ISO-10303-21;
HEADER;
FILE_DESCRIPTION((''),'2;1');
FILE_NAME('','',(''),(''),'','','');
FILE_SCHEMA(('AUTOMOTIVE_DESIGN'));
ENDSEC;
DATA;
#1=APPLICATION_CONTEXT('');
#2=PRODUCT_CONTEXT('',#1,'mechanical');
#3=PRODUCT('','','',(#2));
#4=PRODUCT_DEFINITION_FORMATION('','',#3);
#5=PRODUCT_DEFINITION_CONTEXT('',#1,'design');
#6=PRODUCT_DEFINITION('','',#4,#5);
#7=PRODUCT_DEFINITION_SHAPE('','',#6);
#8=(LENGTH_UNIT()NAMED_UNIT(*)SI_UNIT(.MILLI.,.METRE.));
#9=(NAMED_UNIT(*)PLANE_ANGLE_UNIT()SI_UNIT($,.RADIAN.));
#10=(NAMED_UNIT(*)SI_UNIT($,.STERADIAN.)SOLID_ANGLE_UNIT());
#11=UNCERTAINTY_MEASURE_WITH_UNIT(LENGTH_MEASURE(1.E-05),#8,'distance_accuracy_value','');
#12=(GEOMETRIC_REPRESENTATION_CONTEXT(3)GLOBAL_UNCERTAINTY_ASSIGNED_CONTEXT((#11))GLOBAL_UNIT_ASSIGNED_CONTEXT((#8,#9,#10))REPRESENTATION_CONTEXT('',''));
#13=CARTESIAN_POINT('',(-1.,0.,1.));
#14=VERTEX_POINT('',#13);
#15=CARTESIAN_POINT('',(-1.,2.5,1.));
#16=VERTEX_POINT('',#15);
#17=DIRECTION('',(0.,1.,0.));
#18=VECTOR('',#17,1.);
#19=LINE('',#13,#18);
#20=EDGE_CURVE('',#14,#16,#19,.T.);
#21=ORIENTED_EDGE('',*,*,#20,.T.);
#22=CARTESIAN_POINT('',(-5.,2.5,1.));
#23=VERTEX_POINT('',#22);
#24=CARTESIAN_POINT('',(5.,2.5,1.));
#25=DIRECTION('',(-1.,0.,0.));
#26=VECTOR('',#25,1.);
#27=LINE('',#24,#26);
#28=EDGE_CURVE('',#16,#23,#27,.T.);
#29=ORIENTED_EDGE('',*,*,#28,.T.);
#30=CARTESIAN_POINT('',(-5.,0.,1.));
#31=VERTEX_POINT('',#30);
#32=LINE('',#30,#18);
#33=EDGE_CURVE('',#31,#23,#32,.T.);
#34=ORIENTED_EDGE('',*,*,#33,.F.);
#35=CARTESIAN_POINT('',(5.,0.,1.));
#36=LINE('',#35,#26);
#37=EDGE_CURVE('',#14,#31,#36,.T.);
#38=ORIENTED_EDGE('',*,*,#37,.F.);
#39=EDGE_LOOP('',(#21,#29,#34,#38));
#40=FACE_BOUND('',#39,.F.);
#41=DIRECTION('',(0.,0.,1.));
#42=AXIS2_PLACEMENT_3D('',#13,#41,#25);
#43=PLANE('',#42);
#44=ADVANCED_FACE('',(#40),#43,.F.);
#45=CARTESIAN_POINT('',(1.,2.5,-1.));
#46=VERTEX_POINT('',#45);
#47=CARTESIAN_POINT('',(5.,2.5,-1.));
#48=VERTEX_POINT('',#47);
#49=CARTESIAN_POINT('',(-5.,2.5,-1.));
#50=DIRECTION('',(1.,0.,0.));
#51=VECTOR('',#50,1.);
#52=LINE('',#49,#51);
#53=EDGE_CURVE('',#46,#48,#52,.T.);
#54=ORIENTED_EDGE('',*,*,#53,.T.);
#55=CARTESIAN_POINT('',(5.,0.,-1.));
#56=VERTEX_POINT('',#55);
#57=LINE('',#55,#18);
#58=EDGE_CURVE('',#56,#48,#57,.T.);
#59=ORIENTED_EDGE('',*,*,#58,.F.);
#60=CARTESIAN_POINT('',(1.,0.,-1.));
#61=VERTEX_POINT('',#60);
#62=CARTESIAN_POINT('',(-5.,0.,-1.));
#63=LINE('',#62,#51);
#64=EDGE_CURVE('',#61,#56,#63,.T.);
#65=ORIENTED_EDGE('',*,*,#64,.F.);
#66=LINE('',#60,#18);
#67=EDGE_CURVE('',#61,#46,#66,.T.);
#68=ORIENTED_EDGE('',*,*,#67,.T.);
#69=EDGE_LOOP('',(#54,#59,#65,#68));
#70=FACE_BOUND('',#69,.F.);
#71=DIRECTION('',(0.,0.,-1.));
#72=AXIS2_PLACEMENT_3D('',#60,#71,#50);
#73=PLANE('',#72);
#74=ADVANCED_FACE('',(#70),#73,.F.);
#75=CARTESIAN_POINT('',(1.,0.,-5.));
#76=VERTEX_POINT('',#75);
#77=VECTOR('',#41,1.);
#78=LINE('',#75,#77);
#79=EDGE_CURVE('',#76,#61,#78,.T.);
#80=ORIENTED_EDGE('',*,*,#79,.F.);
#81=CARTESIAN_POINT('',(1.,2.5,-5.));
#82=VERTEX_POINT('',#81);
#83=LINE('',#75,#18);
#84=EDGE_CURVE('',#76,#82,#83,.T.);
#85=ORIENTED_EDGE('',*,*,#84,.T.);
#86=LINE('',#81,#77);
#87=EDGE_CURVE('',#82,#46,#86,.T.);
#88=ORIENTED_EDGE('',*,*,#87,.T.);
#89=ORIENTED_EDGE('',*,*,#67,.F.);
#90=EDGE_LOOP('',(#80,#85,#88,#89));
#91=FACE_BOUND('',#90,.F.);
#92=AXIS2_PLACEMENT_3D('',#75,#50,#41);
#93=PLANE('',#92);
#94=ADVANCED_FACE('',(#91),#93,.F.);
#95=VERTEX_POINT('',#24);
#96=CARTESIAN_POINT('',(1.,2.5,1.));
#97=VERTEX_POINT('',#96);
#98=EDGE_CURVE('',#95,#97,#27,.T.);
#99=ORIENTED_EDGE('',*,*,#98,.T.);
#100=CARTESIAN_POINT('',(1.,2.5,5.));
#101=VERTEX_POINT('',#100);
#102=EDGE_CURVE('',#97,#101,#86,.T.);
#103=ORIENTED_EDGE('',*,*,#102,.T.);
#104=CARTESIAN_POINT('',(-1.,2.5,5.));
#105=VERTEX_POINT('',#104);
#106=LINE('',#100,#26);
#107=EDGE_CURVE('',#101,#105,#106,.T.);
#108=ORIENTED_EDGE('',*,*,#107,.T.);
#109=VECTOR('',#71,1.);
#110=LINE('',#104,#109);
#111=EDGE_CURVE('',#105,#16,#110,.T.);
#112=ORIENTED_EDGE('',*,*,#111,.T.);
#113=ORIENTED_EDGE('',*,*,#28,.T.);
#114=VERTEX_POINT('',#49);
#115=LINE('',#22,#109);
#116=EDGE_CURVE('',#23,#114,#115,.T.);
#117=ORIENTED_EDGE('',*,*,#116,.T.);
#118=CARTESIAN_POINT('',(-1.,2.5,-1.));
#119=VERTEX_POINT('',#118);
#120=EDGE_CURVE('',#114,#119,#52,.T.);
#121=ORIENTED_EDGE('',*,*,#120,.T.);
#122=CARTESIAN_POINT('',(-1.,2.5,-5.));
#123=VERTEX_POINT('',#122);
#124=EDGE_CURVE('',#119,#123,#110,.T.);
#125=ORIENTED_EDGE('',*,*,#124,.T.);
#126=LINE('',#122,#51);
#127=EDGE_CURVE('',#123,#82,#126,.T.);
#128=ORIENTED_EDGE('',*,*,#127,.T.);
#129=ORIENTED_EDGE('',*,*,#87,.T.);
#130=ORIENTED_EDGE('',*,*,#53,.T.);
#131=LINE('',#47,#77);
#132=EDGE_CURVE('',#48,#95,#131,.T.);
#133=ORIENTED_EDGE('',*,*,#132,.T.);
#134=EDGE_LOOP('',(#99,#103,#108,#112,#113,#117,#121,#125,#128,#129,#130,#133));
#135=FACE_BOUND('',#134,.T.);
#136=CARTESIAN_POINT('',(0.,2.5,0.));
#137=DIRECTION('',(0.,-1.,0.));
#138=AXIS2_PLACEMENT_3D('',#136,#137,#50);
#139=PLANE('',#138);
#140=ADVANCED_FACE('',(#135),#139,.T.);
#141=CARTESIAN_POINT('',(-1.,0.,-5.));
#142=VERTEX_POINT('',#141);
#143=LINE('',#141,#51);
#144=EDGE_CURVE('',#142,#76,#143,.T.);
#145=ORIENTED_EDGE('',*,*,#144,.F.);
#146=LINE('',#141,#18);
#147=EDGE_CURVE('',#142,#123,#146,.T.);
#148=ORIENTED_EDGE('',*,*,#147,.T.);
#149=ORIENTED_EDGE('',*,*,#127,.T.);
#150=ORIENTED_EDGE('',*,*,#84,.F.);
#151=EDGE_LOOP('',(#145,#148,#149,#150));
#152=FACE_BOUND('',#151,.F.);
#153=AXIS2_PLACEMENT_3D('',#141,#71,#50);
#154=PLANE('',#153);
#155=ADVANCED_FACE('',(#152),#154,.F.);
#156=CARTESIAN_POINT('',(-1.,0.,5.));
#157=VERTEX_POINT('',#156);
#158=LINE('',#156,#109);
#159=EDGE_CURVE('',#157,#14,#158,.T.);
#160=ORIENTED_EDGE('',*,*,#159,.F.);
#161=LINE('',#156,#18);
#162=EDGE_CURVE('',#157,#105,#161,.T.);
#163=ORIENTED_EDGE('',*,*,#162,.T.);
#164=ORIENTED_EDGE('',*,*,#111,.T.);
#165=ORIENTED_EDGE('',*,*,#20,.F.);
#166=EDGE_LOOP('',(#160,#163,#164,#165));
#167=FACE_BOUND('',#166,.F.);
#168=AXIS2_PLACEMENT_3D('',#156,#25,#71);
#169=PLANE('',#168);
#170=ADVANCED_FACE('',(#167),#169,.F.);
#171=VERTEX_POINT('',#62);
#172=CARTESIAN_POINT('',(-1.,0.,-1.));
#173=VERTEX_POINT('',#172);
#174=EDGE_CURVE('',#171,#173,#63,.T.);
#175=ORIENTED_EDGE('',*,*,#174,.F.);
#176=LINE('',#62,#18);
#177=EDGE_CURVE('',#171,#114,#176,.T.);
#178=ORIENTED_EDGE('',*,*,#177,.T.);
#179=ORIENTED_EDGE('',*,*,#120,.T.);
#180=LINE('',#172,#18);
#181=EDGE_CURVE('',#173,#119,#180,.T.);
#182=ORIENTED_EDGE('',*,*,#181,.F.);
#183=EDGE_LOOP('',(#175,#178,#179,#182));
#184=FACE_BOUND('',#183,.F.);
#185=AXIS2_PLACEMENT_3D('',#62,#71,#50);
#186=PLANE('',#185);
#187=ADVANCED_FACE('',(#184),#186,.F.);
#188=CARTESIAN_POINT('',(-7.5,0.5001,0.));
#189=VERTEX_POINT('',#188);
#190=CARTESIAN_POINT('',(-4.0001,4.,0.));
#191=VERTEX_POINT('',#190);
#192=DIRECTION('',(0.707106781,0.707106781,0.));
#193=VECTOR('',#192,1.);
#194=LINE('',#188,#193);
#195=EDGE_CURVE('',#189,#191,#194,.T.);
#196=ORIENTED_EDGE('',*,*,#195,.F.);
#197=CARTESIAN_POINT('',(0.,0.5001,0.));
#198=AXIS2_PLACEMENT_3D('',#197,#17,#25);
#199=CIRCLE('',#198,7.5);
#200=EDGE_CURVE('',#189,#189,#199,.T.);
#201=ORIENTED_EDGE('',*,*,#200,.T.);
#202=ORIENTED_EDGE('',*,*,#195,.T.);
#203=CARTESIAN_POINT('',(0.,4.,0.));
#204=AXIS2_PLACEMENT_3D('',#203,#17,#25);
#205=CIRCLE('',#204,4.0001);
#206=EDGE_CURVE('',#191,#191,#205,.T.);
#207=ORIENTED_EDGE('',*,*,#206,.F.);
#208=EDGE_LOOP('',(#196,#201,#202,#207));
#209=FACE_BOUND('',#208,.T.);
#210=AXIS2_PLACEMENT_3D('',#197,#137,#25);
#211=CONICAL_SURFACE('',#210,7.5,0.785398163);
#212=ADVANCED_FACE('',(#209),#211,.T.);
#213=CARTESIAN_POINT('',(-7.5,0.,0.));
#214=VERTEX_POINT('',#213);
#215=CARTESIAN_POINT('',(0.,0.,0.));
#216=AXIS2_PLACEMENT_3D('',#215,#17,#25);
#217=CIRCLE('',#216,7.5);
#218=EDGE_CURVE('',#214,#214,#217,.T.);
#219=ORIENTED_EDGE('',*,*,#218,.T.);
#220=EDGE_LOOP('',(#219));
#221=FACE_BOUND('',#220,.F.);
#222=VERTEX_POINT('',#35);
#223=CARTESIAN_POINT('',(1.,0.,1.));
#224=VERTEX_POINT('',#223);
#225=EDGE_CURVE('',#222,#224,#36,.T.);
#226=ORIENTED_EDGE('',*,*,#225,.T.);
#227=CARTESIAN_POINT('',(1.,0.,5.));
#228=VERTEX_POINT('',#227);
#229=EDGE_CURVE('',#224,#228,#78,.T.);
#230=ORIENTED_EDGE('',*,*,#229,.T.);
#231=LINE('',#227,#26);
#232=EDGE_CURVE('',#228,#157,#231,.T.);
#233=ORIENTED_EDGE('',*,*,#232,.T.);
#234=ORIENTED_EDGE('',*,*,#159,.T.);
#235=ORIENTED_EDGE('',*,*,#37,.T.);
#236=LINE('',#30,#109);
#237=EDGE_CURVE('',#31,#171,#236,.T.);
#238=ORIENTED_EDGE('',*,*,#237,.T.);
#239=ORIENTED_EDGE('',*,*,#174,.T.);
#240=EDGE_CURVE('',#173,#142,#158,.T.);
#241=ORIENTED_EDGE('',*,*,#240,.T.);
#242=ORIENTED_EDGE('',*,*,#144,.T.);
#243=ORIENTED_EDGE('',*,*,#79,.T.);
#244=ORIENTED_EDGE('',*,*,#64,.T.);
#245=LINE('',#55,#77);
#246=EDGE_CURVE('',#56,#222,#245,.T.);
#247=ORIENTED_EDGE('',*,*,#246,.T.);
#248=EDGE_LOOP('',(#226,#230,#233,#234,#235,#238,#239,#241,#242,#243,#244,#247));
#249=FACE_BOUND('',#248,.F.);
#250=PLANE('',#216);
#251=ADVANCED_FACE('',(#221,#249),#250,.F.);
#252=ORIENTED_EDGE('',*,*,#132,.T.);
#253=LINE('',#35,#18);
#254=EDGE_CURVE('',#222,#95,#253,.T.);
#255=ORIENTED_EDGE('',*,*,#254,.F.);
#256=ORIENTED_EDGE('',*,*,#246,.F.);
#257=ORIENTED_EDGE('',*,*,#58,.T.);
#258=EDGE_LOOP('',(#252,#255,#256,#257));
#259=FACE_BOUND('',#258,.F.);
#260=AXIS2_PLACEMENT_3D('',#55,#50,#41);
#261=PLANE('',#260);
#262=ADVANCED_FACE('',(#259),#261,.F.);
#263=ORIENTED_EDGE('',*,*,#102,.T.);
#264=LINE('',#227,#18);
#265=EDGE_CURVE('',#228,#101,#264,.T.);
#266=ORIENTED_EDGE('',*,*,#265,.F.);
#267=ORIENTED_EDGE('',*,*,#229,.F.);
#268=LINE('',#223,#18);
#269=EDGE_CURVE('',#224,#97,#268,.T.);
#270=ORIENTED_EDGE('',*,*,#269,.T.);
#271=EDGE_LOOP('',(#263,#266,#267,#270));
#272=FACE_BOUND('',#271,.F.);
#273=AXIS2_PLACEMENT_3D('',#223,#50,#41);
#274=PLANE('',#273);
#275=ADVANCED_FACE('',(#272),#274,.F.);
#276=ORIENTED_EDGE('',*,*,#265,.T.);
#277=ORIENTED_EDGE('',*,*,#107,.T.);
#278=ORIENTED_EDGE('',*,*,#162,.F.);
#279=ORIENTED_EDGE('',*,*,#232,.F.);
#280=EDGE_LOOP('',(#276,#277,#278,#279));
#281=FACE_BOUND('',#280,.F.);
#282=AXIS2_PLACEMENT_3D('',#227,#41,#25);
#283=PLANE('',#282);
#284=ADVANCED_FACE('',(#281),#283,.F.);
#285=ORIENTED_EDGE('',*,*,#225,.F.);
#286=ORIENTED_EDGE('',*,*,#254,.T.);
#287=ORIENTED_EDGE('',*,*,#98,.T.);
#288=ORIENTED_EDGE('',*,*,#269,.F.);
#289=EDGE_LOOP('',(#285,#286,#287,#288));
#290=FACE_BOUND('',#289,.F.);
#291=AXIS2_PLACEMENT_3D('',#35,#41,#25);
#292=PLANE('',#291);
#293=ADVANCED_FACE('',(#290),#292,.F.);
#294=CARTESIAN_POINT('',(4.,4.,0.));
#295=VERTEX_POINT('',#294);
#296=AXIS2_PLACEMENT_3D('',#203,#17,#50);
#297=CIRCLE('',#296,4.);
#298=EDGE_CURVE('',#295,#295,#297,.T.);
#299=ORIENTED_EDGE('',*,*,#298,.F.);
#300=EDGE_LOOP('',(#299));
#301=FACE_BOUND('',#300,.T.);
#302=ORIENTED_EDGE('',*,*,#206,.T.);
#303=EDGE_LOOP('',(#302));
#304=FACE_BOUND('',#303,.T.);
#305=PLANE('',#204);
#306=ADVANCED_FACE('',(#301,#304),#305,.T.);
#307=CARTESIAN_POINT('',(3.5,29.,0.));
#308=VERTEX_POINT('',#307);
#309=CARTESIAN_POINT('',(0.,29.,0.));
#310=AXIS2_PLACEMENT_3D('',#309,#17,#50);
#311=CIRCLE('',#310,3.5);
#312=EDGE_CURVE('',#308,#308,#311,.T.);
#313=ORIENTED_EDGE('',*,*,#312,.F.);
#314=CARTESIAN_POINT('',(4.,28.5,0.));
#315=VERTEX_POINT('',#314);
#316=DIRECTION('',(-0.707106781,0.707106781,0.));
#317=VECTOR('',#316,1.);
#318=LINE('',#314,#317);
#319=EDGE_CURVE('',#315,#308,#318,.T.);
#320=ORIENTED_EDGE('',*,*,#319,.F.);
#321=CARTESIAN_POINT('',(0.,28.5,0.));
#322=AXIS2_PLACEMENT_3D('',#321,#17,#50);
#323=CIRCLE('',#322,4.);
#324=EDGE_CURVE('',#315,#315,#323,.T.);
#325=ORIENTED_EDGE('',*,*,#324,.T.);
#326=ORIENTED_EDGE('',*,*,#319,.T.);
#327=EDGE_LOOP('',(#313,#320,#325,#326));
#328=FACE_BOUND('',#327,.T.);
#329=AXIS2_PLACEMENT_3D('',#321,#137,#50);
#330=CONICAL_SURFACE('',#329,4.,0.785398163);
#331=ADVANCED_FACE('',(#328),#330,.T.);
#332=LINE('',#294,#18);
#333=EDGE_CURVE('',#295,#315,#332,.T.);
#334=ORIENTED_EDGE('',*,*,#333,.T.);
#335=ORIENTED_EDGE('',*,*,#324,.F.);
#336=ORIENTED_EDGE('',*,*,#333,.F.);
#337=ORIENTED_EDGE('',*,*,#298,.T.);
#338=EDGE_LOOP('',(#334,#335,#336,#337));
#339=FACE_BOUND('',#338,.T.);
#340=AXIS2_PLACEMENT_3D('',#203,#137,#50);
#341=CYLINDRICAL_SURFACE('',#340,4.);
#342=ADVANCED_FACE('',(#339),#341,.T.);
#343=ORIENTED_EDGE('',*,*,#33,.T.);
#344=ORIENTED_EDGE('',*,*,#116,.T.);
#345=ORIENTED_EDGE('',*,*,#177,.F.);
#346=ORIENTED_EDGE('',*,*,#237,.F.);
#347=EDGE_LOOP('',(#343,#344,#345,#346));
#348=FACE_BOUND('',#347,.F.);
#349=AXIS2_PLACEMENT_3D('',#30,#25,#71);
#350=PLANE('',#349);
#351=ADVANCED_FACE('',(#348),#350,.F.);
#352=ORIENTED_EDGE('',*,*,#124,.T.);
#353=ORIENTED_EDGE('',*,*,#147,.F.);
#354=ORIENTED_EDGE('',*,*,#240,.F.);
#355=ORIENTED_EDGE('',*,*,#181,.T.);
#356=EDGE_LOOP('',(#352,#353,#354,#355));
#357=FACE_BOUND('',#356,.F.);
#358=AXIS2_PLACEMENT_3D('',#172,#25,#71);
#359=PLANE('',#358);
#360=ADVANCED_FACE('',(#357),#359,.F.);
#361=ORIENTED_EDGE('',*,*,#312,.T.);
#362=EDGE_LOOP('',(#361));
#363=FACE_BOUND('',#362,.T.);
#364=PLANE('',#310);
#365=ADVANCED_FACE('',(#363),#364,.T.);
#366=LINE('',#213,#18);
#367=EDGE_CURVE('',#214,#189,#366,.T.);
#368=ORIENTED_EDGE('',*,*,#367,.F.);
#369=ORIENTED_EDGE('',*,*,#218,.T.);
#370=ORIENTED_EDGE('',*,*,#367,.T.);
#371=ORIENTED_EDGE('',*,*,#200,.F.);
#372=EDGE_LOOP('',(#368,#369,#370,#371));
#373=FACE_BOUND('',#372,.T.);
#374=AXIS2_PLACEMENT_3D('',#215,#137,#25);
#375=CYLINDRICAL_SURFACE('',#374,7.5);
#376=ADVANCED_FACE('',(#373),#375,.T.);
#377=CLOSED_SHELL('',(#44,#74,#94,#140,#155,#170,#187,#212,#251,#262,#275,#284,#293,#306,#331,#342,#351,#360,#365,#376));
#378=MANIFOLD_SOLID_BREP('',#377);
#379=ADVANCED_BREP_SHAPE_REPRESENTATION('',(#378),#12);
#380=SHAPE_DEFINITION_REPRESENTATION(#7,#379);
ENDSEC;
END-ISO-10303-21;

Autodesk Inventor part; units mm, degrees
ref_plane "YZ Plane" through (0, 0, 0) normal (1, 0, 0) x (0, 1, 0)
ref_plane "XZ Plane" through (0, 0, 0) normal (0, 1, 0) x (-1, 0, 0)
ref_plane "XY Plane" through (0, 0, 0) normal (0, 0, 1) x (1, 0, 0)
sketch "Эскиз1" plane through (0, 0, 0) normal (0, 1, 0) x (-1, 0, 0)
  circle A0 centre (0, 0) radius 7.5
  dimension "d0" = 15
extrude "Выдавливание1" add sketch "Эскиз1" along normal blind 4
sketch "Эскиз2" plane through (0, 4, 0) normal (0, 1, 0) x (1, 0, 0)
  circle A0 centre (0, 0) radius 4
  dimension "d3" = 8
extrude "Выдавливание2" add sketch "Эскиз2" along normal blind 25
chamfer "Фаска1" distance 3.5 angle 45 1 edges at (7.5, 4, 0)
thread "Резьба1" size "M8x1.25" class "6g" standard "ANSI Metric M Profile" full length
chamfer "Фаска2" distance 0.5 angle 45 1 edges at (-4, 29, 0)
sketch "Эскиз3" plane through (0, 0, 0) normal (0, -1, 0) x (1, 0, 0)
  line L0 (-5, -1) -> (5, -1)
  line L1 (5, -1) -> (5, 1)
  line L2 (5, 1) -> (-5, 1)
  line L3 (-5, 1) -> (-5, -1)
  line L4 (-5, -1) -> (5, 1) construction
  line L5 (5, -1) -> (-5, 1) construction
  line L6 (-1, -5) -> (1, -5)
  line L7 (1, -5) -> (1, 5)
  line L8 (1, 5) -> (-1, 5)
  line L9 (-1, 5) -> (-1, -5)
  line L10 (-1, -5) -> (1, 5) construction
  line L11 (1, -5) -> (-1, 5) construction
  point P0 (0, 0)
  dimension "d14" = 10
  dimension "d15" = 2
  dimension "d16" = 10
  dimension "d17" = 2
extrude "Выдавливание3" cut sketch "Эскиз3" against normal blind 2.5
properties part number "Винт М8х25 с потайной головкой" material "Сталь"
